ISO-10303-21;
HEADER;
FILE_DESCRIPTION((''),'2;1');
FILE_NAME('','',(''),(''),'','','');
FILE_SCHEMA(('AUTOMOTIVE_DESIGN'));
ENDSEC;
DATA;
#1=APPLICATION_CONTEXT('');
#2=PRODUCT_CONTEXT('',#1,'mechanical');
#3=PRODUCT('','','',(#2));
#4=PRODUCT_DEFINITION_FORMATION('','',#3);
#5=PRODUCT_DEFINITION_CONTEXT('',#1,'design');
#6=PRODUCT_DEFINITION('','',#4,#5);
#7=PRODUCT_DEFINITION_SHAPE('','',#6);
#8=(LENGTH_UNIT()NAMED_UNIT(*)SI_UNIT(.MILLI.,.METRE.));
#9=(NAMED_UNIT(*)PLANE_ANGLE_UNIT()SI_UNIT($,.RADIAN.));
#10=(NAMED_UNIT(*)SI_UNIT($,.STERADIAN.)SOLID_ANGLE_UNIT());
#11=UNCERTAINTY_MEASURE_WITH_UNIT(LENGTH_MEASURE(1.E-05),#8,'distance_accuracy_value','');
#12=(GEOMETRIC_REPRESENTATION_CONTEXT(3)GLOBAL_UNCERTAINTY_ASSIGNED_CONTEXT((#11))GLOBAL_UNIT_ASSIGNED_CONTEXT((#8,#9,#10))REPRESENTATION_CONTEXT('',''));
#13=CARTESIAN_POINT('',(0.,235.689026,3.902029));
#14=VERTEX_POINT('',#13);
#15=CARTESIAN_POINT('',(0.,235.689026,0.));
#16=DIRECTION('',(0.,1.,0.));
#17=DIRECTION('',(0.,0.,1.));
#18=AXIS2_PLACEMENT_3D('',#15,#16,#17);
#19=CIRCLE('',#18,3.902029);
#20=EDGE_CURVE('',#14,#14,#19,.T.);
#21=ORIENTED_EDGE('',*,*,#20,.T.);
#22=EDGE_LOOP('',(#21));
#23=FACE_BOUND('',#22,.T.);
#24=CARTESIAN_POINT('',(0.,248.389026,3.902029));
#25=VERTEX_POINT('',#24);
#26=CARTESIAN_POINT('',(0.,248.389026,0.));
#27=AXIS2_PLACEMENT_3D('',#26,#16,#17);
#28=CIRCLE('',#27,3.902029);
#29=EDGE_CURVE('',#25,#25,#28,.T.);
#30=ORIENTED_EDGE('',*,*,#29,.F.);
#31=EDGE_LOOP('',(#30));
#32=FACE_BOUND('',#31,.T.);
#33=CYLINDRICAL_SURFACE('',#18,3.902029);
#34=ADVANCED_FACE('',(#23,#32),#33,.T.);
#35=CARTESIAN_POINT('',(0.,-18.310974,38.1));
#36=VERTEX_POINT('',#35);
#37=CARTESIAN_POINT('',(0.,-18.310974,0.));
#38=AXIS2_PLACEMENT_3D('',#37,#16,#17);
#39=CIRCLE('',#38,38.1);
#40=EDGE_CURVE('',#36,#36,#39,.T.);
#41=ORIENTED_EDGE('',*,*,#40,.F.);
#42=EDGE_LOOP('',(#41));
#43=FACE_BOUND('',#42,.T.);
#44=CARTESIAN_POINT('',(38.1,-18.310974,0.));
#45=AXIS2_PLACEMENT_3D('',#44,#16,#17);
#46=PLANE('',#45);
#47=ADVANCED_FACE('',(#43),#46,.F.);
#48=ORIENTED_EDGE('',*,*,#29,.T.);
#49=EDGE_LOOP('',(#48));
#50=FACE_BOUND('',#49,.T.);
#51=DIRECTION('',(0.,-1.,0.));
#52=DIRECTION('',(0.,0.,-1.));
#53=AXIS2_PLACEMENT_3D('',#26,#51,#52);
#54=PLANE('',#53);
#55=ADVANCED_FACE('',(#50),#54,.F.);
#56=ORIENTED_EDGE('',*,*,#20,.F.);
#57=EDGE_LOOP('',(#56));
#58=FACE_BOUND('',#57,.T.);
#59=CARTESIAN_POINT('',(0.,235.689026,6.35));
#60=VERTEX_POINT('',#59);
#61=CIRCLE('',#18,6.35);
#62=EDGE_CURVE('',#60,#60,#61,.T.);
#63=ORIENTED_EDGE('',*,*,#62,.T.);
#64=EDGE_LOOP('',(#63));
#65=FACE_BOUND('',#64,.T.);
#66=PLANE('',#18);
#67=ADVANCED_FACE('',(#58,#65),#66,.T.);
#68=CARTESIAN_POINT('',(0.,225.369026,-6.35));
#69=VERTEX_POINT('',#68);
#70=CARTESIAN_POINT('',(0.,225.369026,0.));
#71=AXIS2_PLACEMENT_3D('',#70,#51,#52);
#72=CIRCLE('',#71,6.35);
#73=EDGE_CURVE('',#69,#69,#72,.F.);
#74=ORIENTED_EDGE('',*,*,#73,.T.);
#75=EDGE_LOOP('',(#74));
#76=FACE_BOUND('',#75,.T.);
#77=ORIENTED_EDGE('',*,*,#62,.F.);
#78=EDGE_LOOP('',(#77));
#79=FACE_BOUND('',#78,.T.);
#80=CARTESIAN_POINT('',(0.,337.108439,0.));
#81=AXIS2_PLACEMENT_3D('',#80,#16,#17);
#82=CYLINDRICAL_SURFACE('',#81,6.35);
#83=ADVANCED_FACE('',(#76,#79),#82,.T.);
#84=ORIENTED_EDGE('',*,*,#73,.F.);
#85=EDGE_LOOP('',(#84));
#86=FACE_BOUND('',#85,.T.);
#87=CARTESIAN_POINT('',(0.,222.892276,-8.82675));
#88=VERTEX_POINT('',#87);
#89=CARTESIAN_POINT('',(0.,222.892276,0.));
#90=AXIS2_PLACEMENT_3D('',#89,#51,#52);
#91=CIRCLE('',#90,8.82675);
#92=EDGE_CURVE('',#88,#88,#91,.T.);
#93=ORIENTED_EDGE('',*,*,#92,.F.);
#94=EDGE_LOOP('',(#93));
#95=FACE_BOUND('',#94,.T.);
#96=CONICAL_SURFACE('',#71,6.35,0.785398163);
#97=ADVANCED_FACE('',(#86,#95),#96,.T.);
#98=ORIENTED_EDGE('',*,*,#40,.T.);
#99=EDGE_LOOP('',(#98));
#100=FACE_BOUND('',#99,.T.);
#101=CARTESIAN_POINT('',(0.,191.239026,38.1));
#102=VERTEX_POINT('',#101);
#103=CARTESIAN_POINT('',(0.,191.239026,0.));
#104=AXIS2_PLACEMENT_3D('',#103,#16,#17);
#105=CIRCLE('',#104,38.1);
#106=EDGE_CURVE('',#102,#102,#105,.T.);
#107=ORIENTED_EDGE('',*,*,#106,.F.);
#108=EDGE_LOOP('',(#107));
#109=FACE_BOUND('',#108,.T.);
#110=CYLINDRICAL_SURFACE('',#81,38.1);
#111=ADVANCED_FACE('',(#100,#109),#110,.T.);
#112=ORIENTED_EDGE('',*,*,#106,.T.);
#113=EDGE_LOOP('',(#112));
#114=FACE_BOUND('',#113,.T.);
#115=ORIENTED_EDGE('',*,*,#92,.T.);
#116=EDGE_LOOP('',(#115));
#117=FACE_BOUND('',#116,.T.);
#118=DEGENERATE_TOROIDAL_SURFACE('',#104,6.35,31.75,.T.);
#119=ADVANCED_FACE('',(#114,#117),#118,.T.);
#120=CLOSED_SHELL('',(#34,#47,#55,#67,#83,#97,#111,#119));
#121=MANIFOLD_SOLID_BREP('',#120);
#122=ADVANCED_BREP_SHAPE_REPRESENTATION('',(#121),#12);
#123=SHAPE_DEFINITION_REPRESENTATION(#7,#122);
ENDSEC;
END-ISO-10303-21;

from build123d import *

# Parameters (mm, degrees)
CHAMFER2_SIZE      = 2.38
CUT_EXTRUDE1_START = -12.7
SKETCH2_R          = 6.35
SKETCH2_R_2        = 3.902029093
CUT_EXTRUDE1_DEPTH = 12.7


with BuildPart() as part:
    # Sketch1 → Revolve1 (revolve)
    with BuildSketch(Plane.XY, mode=Mode.PRIVATE) as revolve1_sk:
        with BuildLine():
            Line((0, 248.389026298), (6.35, 248.389026298))
            Line((6.35, 248.389026298), (6.35, 222.989026298))
            ThreePointArc((6.35, 222.989026298), (28.800640303, 213.6896666), (38.1, 191.239026298))
            Line((38.1, 191.239026298), (38.1, -18.310973702))
            Line((38.1, -18.310973702), (0, -18.310973702))
            Line((0, -18.310973702), (0, 248.389026298))
        make_face()
    revolve(revolve1_sk.sketch.rotate(Axis((0, 337.108439078, 0), (0, -1, 0)), 90), axis=Axis((0, 337.108439078, 0), (0, -1, 0)))

    # Chamfer2
    # the kernel refuses this chamfer: 2.38 mm, written as the material it adds along each edge
    with BuildSketch(Plane(origin=(0, 222.989026298, 0), x_dir=(0, 0, 1), z_dir=(1, 0, 0))) as chamfer2_piece_1:
        with BuildLine():
            Line((6.35, -CHAMFER2_SIZE), (8.826750448, 0.096750448))
            ThreePointArc((8.826750448, 0.096750448), (7.624301016, 0.025582639), (6.35, 0))
            Line((6.35, 0), (6.35, -CHAMFER2_SIZE))
        make_face()
    revolve(axis=Axis((0, 222.989026298, 0), (0, -1, 0)))

    # Sketch2 → Cut-Extrude1 (cut)
    with BuildSketch(Plane(origin=(0, 248.389026298, 0), x_dir=(1, 0, 0), z_dir=(0, 1, 0)).offset(CUT_EXTRUDE1_START)):
        with Locations(Location((0, 0, 0), (0, 0, 270))):
            Circle(SKETCH2_R)
        with Locations(Location((0, 0, 0), (0, 0, 270))):
            Circle(SKETCH2_R_2, mode=Mode.SUBTRACT)
    extrude(amount=CUT_EXTRUDE1_DEPTH, mode=Mode.SUBTRACT)


solid = part.part
